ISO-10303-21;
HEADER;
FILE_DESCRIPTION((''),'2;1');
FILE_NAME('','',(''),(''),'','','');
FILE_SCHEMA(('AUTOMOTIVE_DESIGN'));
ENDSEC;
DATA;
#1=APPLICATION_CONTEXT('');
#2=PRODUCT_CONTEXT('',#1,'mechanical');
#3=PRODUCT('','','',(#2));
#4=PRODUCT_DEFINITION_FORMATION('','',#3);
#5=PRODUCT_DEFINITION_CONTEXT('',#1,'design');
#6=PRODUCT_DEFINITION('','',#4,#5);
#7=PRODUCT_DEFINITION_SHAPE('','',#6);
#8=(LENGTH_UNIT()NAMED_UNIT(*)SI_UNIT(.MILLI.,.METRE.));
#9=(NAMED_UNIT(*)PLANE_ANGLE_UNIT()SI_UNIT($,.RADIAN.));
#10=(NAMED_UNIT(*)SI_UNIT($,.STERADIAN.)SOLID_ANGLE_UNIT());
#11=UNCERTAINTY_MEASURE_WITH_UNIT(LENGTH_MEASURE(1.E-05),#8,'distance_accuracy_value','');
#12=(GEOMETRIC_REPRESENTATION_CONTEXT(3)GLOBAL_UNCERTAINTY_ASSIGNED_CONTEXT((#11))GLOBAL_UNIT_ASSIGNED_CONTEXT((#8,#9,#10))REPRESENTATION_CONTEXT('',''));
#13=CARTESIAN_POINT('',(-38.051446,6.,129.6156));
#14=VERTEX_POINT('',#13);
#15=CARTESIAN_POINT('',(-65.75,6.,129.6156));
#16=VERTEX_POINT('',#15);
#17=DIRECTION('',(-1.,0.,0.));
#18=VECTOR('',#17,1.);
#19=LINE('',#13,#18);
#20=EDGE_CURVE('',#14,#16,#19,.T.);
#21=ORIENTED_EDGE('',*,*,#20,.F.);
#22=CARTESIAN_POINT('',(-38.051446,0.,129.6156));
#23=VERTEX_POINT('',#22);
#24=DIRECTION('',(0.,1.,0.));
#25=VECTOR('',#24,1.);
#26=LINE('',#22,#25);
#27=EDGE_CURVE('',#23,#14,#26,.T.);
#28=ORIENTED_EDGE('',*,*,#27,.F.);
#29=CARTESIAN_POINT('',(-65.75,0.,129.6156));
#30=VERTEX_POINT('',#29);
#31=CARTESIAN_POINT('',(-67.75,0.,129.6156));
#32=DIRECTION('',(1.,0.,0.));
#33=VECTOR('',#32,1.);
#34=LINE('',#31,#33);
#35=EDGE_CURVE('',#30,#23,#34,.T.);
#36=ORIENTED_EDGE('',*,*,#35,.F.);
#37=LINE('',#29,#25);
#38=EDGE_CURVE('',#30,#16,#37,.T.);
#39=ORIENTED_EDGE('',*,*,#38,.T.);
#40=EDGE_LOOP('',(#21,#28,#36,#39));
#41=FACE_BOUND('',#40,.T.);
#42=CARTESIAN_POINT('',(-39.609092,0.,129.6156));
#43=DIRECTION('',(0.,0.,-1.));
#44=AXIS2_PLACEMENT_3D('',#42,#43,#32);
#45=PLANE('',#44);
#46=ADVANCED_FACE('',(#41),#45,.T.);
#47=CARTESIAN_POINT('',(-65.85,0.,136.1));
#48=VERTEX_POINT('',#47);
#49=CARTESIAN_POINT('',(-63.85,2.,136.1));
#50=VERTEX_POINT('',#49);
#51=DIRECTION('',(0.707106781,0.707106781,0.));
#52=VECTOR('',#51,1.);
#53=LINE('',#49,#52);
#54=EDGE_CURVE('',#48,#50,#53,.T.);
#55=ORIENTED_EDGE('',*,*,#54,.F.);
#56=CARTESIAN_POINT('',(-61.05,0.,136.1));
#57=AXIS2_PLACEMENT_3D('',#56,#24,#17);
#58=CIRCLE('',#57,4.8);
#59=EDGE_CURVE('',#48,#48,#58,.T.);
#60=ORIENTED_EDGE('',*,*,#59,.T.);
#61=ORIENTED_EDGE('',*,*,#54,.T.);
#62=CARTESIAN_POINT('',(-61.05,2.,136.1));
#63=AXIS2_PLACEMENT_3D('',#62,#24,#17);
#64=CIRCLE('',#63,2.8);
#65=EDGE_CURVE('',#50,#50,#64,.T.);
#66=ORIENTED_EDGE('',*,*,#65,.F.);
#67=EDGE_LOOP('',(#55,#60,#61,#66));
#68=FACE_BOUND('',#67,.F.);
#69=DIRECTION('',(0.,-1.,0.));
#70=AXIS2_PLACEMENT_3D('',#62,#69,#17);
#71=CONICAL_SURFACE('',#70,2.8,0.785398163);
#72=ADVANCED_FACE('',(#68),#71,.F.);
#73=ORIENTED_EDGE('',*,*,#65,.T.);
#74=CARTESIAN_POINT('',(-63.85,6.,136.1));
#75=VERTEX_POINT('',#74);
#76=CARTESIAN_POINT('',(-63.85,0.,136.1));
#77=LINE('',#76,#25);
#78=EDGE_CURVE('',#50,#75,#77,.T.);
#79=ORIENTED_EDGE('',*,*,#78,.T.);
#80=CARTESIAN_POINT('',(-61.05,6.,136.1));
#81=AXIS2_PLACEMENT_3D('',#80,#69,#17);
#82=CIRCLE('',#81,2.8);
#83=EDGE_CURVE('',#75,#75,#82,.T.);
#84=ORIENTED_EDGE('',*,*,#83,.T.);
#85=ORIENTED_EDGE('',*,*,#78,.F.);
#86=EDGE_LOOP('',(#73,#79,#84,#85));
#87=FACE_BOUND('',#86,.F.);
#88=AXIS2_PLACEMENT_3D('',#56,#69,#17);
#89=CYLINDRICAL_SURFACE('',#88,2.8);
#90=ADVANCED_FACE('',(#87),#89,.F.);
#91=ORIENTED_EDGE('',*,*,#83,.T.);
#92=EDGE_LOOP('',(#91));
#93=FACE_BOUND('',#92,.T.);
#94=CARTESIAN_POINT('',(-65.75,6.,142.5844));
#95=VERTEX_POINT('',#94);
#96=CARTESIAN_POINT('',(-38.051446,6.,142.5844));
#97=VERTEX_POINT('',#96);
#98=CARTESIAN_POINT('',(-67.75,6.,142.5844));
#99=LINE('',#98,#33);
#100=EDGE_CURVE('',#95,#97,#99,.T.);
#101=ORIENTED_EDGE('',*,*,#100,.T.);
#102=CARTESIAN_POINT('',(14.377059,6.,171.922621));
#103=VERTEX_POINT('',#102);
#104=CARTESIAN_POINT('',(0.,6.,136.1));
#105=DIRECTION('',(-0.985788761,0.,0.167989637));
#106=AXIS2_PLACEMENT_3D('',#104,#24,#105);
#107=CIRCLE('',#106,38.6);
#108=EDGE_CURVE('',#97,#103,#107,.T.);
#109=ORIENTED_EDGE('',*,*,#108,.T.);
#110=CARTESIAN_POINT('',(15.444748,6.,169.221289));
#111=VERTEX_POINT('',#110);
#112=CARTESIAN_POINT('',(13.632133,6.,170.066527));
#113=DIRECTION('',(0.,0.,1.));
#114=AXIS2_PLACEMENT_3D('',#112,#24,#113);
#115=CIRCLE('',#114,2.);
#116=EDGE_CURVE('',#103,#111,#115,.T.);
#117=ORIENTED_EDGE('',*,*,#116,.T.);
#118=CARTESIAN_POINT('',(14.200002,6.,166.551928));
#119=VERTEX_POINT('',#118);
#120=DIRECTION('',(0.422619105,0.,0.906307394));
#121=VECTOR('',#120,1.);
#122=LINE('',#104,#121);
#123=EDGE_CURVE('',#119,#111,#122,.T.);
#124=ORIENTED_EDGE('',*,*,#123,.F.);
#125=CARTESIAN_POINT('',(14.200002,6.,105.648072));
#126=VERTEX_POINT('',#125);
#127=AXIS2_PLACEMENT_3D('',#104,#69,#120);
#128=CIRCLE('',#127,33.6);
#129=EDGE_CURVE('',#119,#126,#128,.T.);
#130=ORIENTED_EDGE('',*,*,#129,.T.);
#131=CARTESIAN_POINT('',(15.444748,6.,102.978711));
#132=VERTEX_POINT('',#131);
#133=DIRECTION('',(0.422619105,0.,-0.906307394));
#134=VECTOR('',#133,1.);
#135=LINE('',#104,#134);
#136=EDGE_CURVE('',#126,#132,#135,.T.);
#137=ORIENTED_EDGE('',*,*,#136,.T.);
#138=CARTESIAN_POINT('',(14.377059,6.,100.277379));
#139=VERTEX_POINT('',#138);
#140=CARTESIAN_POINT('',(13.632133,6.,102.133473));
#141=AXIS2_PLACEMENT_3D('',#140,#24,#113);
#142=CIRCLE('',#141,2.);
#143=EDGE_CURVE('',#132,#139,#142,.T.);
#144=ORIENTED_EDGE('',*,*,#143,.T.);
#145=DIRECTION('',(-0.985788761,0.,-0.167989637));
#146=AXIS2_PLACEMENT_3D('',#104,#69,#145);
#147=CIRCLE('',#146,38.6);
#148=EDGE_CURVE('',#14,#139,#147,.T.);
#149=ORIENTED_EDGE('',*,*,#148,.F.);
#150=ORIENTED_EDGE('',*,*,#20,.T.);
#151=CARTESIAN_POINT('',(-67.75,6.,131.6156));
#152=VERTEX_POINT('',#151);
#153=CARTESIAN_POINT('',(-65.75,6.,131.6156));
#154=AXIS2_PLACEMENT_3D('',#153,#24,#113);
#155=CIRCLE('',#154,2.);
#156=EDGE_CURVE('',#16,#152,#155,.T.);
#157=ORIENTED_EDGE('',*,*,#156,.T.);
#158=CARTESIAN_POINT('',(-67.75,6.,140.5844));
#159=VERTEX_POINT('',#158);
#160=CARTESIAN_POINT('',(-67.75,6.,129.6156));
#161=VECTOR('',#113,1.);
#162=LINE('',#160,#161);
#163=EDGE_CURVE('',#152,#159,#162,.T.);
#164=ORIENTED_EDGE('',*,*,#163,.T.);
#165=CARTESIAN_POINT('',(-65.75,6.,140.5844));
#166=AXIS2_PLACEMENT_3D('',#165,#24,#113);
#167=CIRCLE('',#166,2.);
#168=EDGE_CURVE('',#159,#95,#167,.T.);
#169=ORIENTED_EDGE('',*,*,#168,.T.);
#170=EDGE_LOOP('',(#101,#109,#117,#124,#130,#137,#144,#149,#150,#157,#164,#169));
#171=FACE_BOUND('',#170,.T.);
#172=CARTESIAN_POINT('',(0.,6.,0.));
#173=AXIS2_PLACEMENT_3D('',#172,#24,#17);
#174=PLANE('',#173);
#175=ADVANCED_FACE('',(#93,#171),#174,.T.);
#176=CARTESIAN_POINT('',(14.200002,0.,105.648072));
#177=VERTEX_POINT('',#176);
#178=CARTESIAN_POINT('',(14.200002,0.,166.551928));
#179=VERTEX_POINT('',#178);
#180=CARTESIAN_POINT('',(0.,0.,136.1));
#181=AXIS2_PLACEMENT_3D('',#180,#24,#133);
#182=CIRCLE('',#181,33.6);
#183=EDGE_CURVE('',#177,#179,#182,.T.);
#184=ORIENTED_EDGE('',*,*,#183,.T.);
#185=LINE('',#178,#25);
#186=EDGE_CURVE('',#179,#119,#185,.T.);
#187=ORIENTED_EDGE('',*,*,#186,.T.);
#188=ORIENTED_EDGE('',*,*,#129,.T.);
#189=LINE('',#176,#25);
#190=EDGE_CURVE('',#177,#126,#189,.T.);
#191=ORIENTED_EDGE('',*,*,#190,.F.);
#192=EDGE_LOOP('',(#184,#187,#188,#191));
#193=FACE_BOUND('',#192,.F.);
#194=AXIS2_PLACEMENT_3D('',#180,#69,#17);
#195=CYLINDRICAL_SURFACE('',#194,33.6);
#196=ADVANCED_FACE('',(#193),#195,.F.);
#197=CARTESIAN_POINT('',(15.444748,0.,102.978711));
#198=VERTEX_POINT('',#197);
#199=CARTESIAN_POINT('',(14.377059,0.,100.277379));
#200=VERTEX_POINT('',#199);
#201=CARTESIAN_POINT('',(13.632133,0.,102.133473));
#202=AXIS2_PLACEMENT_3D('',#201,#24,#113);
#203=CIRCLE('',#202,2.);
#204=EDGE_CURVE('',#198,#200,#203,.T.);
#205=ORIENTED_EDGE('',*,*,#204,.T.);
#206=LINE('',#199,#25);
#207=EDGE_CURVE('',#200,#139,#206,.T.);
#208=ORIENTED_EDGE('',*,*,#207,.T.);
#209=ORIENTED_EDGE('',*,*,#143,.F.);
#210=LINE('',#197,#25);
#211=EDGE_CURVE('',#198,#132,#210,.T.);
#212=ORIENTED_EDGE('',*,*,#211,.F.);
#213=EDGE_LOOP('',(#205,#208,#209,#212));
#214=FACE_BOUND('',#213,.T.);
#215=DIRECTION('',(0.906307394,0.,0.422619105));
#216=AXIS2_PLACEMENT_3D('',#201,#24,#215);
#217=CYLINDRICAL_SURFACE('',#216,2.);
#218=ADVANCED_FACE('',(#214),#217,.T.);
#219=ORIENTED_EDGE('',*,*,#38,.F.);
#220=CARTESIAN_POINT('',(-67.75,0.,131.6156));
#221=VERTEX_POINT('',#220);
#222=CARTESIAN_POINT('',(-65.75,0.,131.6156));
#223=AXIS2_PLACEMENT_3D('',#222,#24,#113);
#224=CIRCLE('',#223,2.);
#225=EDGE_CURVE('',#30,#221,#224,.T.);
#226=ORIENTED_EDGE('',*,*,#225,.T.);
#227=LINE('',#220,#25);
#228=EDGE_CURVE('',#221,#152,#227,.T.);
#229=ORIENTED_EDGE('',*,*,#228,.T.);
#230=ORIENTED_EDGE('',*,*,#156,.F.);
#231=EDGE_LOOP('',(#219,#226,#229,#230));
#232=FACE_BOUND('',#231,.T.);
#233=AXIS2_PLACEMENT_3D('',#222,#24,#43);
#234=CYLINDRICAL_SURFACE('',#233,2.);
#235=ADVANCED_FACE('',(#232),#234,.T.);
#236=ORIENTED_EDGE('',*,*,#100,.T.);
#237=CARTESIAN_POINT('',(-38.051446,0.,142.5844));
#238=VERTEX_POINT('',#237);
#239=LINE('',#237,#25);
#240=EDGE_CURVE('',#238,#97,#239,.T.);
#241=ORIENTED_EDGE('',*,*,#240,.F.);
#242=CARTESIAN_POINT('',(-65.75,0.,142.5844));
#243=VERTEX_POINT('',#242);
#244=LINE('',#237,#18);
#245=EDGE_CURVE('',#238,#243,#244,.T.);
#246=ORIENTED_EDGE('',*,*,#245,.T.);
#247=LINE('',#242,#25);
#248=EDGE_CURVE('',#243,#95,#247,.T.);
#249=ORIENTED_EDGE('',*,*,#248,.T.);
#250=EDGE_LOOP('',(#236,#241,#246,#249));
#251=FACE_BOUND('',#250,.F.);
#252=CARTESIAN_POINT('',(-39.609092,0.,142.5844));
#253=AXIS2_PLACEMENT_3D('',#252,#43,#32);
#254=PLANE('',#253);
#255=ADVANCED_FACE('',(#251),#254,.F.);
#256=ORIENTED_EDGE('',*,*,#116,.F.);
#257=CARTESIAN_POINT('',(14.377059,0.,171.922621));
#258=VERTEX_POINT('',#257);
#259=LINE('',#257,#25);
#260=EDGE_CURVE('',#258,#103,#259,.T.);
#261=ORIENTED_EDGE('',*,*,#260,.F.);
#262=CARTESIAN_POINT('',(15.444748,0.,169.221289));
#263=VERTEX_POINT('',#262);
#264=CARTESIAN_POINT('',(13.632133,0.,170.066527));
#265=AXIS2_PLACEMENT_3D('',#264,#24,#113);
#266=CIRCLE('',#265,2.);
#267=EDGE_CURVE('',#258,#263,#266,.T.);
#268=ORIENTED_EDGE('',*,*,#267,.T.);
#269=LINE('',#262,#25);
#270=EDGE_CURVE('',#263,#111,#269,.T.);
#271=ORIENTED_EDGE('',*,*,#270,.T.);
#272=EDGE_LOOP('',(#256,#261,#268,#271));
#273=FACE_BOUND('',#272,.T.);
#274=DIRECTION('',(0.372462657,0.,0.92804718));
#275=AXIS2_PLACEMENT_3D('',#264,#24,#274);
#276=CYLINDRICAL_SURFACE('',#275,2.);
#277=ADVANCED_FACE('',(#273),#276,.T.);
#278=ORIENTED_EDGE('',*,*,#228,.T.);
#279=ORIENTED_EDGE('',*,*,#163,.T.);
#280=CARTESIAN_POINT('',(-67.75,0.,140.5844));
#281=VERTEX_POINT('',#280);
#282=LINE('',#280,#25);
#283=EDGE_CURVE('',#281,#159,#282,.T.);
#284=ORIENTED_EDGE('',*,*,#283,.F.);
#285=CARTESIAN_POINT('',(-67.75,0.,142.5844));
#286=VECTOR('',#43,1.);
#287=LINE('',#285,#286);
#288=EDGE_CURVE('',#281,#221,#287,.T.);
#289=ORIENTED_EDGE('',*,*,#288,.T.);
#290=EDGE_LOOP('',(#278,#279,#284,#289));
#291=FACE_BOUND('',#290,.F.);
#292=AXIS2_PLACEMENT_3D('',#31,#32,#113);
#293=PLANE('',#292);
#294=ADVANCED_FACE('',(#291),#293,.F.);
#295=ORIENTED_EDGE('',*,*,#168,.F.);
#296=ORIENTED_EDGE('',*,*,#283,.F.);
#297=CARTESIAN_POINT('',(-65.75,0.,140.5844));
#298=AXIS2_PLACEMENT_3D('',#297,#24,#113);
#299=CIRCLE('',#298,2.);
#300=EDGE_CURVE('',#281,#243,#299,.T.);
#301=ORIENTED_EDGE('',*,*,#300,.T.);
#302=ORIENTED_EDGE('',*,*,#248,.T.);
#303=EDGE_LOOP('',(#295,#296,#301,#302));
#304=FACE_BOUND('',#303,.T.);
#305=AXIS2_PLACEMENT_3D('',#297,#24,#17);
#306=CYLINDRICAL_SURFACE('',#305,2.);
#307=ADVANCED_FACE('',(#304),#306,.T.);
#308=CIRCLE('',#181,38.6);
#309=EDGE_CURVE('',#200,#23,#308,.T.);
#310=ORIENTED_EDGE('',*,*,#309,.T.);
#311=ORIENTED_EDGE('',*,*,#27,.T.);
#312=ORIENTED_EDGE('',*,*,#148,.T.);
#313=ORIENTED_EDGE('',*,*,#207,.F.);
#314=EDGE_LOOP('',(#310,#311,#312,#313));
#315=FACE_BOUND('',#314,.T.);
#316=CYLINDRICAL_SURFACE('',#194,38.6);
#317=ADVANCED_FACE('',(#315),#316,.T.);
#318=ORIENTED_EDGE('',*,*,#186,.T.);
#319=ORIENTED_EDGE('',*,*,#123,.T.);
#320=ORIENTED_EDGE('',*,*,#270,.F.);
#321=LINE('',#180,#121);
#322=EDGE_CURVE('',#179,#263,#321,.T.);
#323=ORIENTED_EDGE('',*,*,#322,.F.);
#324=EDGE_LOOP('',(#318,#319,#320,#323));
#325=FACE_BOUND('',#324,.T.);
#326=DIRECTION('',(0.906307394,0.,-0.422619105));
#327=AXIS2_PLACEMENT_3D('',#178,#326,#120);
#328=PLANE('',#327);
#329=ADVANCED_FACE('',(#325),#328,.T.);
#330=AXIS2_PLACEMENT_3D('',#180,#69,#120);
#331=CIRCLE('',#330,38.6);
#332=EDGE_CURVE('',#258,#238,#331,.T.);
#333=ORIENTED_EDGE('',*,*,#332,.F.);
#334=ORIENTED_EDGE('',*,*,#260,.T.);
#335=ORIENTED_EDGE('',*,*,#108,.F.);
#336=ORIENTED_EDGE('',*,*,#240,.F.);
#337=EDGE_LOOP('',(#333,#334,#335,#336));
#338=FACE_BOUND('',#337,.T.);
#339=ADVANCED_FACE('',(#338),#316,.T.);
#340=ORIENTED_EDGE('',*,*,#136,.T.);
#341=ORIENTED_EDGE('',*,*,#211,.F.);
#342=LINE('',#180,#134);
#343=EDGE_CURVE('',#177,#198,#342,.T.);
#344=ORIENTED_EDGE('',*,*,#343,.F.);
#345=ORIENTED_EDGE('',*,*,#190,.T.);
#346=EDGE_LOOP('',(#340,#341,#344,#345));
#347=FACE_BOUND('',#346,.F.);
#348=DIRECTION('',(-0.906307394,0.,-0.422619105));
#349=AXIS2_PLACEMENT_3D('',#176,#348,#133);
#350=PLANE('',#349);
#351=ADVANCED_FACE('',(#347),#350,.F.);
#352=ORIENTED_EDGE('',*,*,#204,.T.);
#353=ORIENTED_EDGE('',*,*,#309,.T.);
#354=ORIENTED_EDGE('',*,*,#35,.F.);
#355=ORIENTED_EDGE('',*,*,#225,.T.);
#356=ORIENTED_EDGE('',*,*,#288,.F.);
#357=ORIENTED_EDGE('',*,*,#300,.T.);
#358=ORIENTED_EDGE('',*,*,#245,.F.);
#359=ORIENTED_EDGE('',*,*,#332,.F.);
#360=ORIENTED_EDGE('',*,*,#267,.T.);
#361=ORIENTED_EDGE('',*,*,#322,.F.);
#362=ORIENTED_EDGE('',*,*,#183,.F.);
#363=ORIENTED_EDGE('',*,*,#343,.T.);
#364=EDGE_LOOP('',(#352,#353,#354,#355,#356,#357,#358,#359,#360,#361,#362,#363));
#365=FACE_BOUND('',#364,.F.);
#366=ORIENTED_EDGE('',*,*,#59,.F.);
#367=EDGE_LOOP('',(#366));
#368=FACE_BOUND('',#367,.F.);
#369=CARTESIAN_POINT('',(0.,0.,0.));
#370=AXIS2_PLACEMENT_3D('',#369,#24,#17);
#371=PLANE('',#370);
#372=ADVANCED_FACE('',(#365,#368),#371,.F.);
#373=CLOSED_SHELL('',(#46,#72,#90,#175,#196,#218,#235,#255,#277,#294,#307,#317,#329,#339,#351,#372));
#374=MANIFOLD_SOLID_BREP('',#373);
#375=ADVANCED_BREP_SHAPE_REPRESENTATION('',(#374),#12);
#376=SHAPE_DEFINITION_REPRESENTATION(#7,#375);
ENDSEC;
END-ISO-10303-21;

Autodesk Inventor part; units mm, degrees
ref_plane "YZ Plane" through (0, 0, 0) normal (1, 0, 0) x (0, 1, 0)
ref_plane "XZ Plane" through (0, 0, 0) normal (0, 1, 0) x (-1, 0, 0)
ref_plane "XY Plane" through (0, 0, 0) normal (0, 0, 1) x (1, 0, 0)
sketch "Sketch1" plane through (0, 0, 0) normal (0, 1, 0) x (-1, 0, 0)
  circle A0 centre (0, 0) radius 32.5
  line L0 (0, 32.5) -> (0, 102.5)
  line L1 (0, 102.5) -> (0, 169.7)
  circle A1 centre (0, 136.1) radius 33.6
  circle A2 centre (0, 136.1) radius 42.65
  line L2 (42.65, 136.1) -> (38.65, 136.1)
  line L3 (38.65, 136.1) -> (61.05, 136.1)
  circle A3 centre (61.05, 136.1) radius 22.4
  line L4 (61.05, 136.1) -> (61.05, 134.2)
  line L5 (61.05, 136.1) -> (61.05, 138)
  circle A4 centre (61.05, 136.1) radius 2.8
  line L6 (61.05, 138) -> (63.1067, 138)
  line L7 (61.05, 138) -> (58.9933, 138)
  line L8 (61.05, 134.2) -> (58.9933, 134.2)
  line L9 (61.05, 134.2) -> (63.1067, 134.2)
  circle A5 centre (61.05, 136.1) radius 4.7
  line L10 (0, -32.5) -> (0, -37.5)
  circle A6 centre (0, 0) radius 37.5
  line L11 (0, 32.5) -> (5, 32.5)
  line L12 (5, 32.5) -> (5, 93.7441)
  line L13 (0, 32.5) -> (-5, 32.5)
  line L14 (-5, 32.5) -> (-5, 93.7441)
  line L15 (0, 0) -> (29.257, 0) construction
  line L16 (0, 0) -> (37.5, 0) construction
  line L17 (0, 0) -> (32.476, 18.75)
  line L18 (0, 0) -> (37.5, 0) construction
  line L19 (0, 0) -> (-32.476, 18.75)
  line L20 (0, 0) -> (37.5, 0) construction
  line L21 (0, 169.7) -> (0, 174.7)
  circle A7 centre (0, 136.1) radius 38.6
  line L22 (65.75, 136.1) -> (67.75, 136.1)
  line L23 (62.4573, 140.5844) -> (62.4573, 142.5844)
  line L24 (62.4573, 131.6156) -> (62.4573, 129.6156)
  line L25 (5, 93.7441) -> (5, 102.8741)
  line L26 (-5, 93.7441) -> (-5, 102.8741)
  line L27 (62.4573, 129.6156) -> (32.9684, 129.6156)
  line L28 (62.4573, 142.5844) -> (32.9684, 142.5844)
  line L29 (62.4573, 142.5844) -> (67.75, 142.5844)
  line L30 (67.75, 142.5844) -> (67.75, 136.1)
  line L31 (67.75, 129.6156) -> (67.75, 136.1)
  line L32 (67.75, 129.6156) -> (62.4573, 129.6156)
  line L33 (0, 136.1) -> (-18.0247, 97.446)
  line L34 (0, 136.1) -> (42.65, 136.1) construction
  line L35 (0, 136.1) -> (-18.0247, 174.754)
  line L36 (0, 136.1) -> (42.65, 136.1) construction
  point P0 (37.3613, 126.4)
  point P1 (41.3134, 146.6937)
  point P2 (41.3134, 125.5063)
  point P3 (42.1542, 129.6156)
  point P4 (42.1542, 142.5844)
  point P5 (5, 97.8252)
  point P6 (38.0515, 129.6156)
  point P7 (39.6091, 129.6156)
  point P8 (39.6091, 142.5844)
  point P9 (38.0515, 142.5844)
  point P10 (-5, 97.8252)
  point P11 (-16.3131, 171.0835)
  point P12 (-14.2, 166.5519)
  point P13 (-14.2, 105.6481)
  point P14 (-16.3131, 101.1165)
  dimension "d0" = 65
  dimension "d1" = 70
  dimension "d2" = 67.2
  dimension "d3" = 85.3
  dimension "d4" = 4
  dimension "d6" = 22.4
  dimension "d7" = 1.9
  dimension "d8" = 1.9
  dimension "d9" = 5.6
  dimension "d10" = 9.4
  dimension "d11" = 5
  dimension "d12" = 5
  dimension "d13" = 5
  dimension "d16" = 30
  dimension "d17" = 150
  dimension "d18" = 5
  dimension "d19" = 2
  dimension "d20" = 2
  dimension "d21" = 2
  dimension "d28" = 115
  dimension "d29" = 115
extrude "Extrusion1" add sketch "Sketch1" along normal blind 6 contours A7 L26 A1 L0 | L0 A1 L25 A7 | A7 L33 A1 L26 | L25 A1 L27 A7 | L27 A3 L2 A2 | A2 L3 A5 L24 L27 | L27 A7 L28 A3 | L27 A1 L28 A7 | A7 L21 A1 L35 | L2 A3 L28 A2 | A2 L28 L23 A5 L3 | L24 A5 L22 L31 L32 | L21 A7 L28 A1 | A5 | L29 L30 L22 A5 L23
chamfer "Chamfer1" distance 2 angle 45 1 edges at (-58.25, 0, 136.1)
fillet "Fillet1" radius 2 4 edges at (-67.75, 3, 129.6156) (-67.75, 3, 142.5844) (16.3131, 3, 101.1165) (16.3131, 3, 171.0835)
properties part number "testing gear distances"
